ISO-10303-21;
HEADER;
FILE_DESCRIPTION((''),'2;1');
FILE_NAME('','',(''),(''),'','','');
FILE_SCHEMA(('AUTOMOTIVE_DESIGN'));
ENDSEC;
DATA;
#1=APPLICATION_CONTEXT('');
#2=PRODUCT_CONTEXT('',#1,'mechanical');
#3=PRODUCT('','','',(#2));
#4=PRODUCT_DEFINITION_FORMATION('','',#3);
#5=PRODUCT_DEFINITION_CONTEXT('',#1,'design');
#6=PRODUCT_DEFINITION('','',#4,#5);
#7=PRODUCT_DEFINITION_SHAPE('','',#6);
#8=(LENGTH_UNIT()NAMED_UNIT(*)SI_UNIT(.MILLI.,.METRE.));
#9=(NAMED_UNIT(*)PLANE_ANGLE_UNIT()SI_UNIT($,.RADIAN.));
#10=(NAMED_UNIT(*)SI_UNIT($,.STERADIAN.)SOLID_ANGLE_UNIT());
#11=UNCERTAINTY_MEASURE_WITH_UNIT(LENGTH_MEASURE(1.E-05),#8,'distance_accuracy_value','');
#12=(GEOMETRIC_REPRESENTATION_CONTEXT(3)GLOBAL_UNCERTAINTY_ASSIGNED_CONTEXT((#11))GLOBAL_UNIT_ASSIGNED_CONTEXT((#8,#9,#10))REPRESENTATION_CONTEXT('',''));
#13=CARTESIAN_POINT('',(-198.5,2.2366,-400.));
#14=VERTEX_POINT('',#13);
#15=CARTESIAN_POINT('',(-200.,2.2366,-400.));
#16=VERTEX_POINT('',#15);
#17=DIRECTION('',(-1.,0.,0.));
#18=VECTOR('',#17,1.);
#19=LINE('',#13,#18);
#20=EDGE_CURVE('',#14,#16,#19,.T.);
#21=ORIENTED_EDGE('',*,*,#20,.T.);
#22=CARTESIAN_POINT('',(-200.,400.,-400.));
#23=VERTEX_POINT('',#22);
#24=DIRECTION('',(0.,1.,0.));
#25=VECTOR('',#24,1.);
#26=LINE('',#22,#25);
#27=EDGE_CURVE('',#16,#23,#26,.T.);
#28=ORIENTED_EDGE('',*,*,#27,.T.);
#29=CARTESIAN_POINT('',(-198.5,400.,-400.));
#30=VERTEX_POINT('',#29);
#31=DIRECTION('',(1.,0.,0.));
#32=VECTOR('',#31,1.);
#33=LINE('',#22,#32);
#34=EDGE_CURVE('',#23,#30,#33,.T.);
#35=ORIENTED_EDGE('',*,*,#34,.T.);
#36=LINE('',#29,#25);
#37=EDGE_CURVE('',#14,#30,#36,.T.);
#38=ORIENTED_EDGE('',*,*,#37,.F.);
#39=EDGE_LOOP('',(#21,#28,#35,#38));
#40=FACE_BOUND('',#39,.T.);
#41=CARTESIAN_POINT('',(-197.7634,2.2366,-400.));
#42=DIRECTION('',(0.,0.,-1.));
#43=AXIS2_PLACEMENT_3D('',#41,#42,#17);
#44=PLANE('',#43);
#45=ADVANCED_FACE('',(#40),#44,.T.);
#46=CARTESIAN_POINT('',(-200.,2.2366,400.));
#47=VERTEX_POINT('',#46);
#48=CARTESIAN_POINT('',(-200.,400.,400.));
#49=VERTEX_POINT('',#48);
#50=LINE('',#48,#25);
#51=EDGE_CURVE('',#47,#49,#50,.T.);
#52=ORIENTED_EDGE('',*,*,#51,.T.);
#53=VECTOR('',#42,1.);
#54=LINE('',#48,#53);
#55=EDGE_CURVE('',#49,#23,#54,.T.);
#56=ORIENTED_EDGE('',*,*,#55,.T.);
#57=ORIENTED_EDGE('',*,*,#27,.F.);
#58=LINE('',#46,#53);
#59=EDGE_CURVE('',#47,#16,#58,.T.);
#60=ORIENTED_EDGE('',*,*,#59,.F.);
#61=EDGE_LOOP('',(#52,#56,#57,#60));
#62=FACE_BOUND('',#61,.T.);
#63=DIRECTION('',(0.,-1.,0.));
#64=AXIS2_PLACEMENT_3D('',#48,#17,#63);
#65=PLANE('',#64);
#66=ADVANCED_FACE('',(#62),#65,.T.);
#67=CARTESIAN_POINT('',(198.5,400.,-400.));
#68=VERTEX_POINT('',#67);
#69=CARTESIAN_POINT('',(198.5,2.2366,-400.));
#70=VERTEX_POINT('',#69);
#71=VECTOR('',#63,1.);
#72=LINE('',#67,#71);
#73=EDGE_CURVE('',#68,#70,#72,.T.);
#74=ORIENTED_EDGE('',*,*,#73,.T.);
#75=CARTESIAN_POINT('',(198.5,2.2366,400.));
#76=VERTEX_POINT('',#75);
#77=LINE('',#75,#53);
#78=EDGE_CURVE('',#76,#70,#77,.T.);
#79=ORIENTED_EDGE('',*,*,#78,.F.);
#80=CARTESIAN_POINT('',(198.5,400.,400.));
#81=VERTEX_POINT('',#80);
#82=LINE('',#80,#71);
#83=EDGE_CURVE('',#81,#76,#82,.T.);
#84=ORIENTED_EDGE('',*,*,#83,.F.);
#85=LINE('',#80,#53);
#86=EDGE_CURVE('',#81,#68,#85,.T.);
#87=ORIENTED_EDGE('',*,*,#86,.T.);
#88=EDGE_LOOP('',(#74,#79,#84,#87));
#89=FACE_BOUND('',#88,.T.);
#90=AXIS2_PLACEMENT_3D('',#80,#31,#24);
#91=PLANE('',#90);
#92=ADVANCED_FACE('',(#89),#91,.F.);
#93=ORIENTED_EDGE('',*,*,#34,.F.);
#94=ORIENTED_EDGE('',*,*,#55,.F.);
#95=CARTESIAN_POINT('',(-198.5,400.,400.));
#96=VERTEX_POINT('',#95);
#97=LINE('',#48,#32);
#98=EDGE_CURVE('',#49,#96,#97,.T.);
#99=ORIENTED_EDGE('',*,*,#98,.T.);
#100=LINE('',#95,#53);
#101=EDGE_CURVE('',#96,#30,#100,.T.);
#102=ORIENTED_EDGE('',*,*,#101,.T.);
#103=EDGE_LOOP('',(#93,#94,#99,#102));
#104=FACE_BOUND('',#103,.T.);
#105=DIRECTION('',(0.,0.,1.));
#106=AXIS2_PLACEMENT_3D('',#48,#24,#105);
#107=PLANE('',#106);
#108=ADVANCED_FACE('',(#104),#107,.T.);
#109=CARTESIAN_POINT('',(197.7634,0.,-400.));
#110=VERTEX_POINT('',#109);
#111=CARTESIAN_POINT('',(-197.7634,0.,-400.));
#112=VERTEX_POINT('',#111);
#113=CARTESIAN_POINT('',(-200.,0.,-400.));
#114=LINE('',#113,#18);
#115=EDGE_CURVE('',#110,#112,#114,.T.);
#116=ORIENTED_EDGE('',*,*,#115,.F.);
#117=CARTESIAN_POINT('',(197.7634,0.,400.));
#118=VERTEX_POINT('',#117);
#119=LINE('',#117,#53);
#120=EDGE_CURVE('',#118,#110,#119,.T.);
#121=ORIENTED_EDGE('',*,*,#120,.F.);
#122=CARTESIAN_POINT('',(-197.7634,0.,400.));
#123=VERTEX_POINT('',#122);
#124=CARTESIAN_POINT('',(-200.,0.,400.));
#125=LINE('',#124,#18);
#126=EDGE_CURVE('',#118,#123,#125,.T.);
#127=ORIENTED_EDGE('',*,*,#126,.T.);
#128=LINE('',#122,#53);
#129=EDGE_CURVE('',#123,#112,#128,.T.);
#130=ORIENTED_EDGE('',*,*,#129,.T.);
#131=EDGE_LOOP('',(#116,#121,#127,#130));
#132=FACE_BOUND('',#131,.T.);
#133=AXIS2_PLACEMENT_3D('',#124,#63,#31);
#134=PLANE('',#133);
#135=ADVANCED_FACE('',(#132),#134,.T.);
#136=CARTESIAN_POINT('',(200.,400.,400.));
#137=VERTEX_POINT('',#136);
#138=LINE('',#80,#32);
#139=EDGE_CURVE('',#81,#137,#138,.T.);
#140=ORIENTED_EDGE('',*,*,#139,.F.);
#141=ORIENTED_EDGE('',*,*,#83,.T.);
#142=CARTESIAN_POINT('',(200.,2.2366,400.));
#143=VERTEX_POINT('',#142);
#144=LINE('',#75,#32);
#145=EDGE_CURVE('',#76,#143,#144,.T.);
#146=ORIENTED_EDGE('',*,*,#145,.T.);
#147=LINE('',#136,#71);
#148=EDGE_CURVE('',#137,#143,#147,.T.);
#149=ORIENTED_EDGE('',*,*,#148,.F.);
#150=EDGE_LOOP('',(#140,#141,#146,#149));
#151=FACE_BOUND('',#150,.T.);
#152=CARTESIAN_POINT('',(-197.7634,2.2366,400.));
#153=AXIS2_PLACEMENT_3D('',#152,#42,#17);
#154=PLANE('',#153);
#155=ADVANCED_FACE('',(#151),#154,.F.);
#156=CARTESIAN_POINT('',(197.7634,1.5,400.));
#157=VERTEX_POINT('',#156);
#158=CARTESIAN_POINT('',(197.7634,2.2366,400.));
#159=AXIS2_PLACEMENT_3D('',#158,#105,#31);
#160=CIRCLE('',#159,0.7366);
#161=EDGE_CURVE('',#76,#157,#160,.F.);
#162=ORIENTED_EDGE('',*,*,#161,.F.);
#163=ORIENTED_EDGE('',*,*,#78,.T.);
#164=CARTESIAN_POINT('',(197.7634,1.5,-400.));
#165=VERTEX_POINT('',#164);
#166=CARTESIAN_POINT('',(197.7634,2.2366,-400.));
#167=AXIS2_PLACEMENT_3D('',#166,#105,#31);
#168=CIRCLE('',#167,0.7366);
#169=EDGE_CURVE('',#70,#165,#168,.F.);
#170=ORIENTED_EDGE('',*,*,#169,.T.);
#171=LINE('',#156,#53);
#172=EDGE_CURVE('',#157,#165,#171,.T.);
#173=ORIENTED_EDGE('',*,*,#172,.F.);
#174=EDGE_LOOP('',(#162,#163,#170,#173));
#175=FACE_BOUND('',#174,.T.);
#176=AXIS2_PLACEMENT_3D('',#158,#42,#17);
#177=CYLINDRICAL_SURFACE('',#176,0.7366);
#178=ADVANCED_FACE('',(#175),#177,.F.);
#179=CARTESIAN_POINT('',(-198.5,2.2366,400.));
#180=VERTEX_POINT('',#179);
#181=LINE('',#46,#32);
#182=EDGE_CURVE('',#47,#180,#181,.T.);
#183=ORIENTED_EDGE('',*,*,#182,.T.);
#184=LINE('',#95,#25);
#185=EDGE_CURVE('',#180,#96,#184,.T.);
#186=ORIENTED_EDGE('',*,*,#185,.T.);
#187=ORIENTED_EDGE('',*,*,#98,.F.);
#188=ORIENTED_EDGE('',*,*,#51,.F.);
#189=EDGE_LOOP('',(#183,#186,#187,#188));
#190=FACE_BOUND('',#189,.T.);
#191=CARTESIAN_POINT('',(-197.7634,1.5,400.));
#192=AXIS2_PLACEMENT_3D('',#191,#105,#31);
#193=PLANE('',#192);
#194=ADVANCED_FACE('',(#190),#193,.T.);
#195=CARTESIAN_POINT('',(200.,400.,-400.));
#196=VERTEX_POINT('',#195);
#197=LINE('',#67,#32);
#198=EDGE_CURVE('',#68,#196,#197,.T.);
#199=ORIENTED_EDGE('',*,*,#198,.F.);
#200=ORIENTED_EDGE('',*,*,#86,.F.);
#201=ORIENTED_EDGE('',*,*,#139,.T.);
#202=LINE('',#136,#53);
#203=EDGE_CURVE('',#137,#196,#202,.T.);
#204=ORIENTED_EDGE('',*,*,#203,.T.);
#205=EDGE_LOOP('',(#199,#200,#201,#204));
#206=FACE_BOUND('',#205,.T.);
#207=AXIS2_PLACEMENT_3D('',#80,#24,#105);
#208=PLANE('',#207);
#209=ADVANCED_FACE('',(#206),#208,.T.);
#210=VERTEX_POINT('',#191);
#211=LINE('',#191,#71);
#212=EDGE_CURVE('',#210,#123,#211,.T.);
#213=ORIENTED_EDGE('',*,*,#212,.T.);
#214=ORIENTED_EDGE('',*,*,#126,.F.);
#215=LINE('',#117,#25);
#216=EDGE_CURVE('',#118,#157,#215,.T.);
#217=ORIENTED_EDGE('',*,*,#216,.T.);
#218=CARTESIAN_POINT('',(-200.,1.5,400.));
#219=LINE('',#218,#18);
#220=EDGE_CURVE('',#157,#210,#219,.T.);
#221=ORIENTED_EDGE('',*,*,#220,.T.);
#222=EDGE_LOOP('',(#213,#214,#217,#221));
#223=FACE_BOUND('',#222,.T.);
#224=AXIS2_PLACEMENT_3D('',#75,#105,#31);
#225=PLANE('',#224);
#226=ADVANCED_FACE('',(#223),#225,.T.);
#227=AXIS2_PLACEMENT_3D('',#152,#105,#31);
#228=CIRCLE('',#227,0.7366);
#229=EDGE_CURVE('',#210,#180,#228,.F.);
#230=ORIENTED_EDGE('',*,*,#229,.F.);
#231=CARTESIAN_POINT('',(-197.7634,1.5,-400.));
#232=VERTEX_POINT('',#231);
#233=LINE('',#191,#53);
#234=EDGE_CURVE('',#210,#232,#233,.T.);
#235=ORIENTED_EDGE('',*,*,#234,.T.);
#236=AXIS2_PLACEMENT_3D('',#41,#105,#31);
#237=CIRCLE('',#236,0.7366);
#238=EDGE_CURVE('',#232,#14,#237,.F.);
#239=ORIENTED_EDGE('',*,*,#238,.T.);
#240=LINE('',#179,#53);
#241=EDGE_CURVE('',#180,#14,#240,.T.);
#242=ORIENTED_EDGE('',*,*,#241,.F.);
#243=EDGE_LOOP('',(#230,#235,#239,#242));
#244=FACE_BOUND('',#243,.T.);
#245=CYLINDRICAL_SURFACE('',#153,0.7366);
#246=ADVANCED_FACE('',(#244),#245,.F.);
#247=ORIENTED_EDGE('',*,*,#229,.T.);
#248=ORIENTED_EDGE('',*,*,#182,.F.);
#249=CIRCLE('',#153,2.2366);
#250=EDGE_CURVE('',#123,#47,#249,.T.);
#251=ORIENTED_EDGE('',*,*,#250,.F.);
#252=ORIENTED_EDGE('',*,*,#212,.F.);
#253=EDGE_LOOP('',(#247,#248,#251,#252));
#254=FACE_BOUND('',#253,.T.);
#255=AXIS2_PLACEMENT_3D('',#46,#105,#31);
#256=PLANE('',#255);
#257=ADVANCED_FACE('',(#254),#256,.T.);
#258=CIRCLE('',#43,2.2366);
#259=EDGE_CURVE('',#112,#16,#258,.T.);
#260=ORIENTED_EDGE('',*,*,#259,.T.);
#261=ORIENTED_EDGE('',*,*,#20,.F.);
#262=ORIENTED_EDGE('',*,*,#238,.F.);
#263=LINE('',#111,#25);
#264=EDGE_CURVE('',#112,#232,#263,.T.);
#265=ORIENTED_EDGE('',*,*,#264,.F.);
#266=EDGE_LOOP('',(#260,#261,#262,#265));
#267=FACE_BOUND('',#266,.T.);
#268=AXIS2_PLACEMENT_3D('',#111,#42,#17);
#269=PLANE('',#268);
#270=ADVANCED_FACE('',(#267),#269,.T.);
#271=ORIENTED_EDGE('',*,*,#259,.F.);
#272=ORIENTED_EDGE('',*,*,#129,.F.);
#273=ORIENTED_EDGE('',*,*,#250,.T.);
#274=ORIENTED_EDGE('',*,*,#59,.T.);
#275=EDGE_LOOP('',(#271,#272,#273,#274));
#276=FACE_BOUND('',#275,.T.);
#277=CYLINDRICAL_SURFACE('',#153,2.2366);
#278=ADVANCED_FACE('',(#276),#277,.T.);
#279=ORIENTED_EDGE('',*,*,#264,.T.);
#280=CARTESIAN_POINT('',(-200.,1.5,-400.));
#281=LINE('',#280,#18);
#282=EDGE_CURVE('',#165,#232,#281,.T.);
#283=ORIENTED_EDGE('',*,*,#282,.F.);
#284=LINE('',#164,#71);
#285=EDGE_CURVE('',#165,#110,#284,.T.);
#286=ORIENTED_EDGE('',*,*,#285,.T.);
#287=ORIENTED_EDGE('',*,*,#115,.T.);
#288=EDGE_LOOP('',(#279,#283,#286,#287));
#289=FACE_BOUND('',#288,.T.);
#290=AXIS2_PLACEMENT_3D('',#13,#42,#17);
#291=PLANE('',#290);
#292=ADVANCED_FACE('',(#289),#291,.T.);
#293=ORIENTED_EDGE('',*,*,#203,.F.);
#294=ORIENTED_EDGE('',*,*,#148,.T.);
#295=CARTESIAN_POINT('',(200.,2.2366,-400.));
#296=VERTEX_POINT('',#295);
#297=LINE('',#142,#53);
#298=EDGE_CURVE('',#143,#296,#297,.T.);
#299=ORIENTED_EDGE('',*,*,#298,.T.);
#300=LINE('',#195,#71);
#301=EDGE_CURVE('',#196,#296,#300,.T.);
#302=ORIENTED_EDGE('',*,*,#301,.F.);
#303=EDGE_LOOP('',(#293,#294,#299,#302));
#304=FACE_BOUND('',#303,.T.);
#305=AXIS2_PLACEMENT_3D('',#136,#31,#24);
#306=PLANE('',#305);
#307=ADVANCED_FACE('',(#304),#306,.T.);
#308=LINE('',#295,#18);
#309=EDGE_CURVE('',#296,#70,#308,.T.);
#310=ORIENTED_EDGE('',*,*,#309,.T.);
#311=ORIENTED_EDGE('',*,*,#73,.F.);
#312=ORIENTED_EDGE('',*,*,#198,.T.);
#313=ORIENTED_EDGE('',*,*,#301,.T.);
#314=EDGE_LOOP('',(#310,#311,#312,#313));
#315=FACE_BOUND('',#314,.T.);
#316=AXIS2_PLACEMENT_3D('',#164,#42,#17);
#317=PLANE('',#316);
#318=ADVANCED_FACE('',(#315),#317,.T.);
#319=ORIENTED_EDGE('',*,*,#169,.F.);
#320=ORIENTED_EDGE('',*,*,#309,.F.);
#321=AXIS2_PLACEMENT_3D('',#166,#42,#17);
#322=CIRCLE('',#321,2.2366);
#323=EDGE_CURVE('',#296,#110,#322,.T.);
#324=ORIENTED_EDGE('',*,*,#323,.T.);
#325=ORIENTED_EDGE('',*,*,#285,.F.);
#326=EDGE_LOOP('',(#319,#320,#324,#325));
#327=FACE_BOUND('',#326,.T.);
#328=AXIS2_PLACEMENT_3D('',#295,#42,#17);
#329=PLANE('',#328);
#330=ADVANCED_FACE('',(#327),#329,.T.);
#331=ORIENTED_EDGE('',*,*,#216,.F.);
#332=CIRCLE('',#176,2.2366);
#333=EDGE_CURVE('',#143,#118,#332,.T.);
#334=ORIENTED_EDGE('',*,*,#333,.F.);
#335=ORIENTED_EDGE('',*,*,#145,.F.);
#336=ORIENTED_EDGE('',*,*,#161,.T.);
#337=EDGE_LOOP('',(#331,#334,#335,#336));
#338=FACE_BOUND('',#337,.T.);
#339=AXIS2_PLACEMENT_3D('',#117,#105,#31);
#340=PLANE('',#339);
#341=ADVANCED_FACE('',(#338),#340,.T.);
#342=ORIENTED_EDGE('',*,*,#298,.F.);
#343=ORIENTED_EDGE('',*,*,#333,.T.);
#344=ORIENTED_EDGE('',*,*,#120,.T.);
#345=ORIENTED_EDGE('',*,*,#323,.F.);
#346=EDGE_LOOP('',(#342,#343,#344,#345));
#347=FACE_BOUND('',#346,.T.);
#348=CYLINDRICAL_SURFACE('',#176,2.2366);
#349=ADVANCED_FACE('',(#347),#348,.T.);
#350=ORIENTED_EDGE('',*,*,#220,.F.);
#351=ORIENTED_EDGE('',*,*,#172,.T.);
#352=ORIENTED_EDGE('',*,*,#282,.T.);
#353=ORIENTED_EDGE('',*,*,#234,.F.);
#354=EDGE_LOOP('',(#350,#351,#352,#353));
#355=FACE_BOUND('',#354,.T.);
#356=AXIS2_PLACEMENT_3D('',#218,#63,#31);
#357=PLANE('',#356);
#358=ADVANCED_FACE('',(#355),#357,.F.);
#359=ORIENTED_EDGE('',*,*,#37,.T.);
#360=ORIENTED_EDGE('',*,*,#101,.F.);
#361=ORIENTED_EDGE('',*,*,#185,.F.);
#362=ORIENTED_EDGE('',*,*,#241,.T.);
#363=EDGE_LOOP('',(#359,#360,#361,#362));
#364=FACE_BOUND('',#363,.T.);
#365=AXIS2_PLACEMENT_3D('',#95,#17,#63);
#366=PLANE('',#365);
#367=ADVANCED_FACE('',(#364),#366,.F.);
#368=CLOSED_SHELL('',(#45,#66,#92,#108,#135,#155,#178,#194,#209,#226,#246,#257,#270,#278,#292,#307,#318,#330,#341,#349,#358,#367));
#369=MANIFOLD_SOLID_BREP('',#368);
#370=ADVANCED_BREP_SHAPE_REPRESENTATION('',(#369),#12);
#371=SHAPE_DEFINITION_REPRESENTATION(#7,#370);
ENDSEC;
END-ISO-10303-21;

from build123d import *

# Parameters (mm, degrees)
TABAN_FLAN_1_DEPTH = 400


# Sheet-metal steps are written as plain solids
with BuildPart() as part:
    # Çizim1 → Taban-Flanş1 (new, symmetric)
    with BuildSketch(Plane.XY):
        with BuildLine():
            Line((-200, 400), (-200, 2.2366))
            ThreePointArc((-200, 2.2366), (-199.344915027, 0.655084973), (-197.7634, 0))
            Line((-197.7634, 0), (197.7634, 0))
            ThreePointArc((197.7634, 0), (199.344915027, 0.655084973), (200, 2.2366))
            Line((200, 2.2366), (200, 400))
            Line((200, 400), (198.5, 400))
            Line((198.5, 400), (198.5, 2.2366))
            ThreePointArc((198.5, 2.2366), (198.284254855, 1.715745145), (197.7634, 1.5))
            Line((197.7634, 1.5), (-197.7634, 1.5))
            ThreePointArc((-197.7634, 1.5), (-198.284254855, 1.715745145), (-198.5, 2.2366))
            Line((-198.5, 2.2366), (-198.5, 400))
            Line((-198.5, 400), (-200, 400))
        make_face()
    extrude(amount=TABAN_FLAN_1_DEPTH, both=True)


solid = part.part
